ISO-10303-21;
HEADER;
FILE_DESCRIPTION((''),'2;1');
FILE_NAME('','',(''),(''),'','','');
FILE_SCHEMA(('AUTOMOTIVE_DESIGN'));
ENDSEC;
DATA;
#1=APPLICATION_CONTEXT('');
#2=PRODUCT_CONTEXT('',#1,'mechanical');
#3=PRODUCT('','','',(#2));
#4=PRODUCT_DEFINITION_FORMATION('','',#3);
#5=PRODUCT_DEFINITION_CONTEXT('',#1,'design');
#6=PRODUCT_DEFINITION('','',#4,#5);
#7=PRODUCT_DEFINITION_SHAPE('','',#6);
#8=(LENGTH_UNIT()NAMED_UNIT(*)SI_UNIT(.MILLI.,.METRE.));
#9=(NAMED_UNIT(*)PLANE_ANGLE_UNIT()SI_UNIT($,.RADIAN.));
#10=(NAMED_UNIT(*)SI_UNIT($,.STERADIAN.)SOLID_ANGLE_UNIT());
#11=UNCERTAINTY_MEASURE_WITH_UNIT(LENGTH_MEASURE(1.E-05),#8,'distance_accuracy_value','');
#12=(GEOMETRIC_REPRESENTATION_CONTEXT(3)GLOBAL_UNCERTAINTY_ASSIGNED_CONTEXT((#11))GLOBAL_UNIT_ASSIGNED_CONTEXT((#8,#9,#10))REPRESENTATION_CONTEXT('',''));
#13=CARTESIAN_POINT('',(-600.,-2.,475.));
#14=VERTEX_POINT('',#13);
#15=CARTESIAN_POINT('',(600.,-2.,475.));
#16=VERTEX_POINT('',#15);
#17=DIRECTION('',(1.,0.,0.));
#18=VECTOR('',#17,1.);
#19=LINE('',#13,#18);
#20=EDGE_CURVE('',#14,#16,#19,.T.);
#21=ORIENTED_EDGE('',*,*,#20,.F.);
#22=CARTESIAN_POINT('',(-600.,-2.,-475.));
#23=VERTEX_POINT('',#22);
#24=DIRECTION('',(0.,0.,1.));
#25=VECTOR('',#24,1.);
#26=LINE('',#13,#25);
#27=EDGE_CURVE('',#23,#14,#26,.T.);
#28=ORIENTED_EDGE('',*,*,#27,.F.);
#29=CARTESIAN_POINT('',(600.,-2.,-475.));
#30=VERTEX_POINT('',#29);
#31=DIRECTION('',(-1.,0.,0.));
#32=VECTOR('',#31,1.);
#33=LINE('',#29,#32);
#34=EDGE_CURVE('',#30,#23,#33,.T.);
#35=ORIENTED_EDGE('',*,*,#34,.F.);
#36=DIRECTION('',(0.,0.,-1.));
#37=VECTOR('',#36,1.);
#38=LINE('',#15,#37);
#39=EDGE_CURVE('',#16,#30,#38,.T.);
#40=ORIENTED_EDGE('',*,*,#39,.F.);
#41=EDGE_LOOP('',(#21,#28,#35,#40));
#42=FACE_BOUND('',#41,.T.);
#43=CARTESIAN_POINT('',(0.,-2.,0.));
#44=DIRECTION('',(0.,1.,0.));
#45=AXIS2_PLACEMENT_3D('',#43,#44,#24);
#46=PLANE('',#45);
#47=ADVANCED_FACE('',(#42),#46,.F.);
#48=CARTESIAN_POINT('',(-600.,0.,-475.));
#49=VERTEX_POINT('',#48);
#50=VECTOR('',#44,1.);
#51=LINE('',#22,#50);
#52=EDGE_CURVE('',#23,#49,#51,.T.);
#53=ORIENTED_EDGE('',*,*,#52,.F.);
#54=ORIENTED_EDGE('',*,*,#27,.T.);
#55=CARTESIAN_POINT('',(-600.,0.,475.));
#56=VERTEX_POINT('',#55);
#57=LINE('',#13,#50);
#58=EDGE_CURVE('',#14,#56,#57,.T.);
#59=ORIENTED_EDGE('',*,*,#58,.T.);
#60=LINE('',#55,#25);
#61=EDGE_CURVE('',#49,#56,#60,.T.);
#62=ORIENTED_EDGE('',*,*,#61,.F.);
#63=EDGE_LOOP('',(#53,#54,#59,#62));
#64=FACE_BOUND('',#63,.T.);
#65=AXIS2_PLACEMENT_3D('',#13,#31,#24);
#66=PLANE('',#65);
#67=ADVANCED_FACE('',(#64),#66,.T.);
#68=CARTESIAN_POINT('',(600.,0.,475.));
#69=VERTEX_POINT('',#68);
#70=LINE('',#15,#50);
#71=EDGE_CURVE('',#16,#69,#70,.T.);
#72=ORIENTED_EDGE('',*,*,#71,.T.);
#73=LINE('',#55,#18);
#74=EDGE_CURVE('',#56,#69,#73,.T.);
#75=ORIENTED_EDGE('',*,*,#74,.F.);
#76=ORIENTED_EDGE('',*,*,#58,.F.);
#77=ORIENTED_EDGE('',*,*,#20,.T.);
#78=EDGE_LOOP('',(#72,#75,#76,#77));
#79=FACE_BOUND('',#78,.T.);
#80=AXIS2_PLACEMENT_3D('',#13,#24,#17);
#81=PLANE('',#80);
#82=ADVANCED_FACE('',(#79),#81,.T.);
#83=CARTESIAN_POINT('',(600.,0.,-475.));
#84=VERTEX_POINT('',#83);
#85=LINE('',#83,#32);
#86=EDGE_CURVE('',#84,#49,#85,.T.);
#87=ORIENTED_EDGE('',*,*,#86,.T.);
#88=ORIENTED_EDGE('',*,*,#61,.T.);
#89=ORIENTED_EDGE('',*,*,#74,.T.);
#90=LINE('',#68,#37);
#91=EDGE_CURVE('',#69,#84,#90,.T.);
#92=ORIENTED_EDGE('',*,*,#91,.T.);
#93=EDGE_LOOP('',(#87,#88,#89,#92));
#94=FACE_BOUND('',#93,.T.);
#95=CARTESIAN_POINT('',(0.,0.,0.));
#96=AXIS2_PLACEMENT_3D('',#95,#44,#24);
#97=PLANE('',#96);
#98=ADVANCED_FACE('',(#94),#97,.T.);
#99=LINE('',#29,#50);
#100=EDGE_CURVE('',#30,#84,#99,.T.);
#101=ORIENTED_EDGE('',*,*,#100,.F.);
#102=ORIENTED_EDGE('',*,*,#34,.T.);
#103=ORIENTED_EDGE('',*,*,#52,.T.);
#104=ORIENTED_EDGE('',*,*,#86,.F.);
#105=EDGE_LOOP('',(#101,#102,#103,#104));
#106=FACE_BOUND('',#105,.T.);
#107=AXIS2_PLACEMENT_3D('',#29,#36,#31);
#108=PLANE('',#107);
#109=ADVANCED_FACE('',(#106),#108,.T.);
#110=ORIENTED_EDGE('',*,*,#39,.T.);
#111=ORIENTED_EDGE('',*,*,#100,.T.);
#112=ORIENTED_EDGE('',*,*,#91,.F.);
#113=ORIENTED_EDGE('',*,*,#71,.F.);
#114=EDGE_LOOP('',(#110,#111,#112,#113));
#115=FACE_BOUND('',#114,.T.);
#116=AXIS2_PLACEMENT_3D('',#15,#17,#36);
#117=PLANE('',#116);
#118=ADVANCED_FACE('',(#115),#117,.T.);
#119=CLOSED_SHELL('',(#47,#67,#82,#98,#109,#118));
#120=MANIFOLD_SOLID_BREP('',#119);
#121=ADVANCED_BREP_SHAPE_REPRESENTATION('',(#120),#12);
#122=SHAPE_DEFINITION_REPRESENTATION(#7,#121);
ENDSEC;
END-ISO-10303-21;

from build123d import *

# Parameters (mm, degrees)
SKETCH1_W          = 1200
SKETCH1_H          = 950
BASE_FLANGE1_DEPTH = 2


# Sheet-metal steps are written as plain solids
with BuildPart() as part:
    # Sketch1 → Base-Flange1 (new body)
    with BuildSketch(Plane(origin=(0, 0, 0), x_dir=(1, 0, 0), z_dir=(0, 1, 0))):
        Rectangle(SKETCH1_W, SKETCH1_H)
    extrude(amount=-BASE_FLANGE1_DEPTH)


solid = part.part
